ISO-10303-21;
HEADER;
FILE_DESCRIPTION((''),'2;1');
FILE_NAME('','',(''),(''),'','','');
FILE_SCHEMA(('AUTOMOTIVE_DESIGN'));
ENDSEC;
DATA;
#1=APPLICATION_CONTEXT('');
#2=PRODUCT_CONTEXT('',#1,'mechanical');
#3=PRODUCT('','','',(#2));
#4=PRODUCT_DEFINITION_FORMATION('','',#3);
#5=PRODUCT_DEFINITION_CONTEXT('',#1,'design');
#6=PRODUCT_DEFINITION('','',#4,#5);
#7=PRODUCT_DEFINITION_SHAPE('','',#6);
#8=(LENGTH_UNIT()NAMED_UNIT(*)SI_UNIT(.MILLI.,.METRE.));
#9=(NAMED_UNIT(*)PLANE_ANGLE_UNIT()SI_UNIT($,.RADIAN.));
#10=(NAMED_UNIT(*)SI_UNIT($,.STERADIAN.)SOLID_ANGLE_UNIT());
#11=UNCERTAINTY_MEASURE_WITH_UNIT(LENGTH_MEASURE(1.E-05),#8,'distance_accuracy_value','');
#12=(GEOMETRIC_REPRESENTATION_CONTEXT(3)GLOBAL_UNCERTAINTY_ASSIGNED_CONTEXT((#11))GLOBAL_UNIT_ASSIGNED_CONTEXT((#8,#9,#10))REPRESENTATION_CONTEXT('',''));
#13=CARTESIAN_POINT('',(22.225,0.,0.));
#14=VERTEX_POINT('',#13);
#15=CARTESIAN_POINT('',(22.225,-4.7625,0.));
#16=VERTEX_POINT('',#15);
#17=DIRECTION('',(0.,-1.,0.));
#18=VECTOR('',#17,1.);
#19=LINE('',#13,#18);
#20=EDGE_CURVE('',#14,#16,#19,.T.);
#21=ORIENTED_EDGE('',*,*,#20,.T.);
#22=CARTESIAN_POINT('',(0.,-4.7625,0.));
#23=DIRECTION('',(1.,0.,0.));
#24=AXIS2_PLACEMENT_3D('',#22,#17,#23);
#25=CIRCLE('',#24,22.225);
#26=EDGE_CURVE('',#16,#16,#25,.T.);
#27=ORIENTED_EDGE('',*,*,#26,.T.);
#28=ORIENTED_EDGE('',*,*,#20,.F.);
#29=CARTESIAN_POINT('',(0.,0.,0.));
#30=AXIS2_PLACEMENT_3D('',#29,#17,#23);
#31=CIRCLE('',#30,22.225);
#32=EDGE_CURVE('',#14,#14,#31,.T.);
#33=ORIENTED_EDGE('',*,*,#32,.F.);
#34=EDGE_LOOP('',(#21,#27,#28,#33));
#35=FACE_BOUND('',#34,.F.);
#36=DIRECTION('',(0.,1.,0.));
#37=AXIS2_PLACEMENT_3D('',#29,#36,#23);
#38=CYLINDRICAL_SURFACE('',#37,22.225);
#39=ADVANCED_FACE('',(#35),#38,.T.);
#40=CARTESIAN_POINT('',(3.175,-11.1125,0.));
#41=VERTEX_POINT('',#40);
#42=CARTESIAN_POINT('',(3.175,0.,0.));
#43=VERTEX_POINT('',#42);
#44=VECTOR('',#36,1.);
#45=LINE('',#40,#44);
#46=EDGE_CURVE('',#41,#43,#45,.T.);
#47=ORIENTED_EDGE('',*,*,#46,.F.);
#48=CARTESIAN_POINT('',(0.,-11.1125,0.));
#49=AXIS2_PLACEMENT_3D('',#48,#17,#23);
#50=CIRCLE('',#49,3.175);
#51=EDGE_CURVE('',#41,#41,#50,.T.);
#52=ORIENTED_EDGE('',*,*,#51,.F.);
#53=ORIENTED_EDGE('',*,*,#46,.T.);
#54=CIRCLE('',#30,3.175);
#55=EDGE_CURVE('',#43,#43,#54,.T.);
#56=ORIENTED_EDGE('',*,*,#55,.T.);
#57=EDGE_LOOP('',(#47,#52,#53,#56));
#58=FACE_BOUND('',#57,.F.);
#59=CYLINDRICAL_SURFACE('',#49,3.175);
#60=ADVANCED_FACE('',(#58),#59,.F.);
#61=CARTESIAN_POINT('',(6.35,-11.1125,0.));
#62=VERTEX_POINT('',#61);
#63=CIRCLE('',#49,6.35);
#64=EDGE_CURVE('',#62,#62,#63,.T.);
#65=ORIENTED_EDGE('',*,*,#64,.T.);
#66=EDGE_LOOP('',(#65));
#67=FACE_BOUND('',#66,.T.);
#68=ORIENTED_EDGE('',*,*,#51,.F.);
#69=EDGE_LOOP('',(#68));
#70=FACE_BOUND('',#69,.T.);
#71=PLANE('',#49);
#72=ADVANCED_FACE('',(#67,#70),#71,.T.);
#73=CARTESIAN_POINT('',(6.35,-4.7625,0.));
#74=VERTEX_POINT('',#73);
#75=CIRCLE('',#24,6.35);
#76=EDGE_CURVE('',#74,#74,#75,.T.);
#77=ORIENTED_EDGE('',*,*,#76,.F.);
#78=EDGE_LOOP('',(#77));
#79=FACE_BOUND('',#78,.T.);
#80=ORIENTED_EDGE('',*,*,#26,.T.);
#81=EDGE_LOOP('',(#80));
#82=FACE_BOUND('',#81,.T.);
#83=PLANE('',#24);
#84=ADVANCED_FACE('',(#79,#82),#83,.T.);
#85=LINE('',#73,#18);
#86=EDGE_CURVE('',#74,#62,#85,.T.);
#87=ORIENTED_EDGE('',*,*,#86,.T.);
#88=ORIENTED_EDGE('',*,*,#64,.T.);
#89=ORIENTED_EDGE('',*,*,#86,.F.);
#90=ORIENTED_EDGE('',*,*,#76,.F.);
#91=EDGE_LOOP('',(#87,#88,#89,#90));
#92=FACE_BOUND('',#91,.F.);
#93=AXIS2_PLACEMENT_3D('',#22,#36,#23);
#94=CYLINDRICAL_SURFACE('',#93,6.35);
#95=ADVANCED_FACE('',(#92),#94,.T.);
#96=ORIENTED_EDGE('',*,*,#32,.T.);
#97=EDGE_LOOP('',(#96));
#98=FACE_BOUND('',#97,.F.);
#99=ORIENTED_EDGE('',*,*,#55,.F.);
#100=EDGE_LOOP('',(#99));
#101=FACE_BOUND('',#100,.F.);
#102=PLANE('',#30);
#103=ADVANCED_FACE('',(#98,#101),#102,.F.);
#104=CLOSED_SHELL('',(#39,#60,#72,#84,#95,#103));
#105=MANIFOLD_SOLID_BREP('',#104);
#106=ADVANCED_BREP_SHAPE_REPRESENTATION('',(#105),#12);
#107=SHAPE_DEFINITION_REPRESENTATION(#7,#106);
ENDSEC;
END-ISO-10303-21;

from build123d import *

# Parameters (mm, degrees)
F0_R          = 22.225
F1_DEPTH      = 4.7625
F2_R          = 6.35
F3_DEPTH      = 6.35
F4_R          = 3.175
F5_DEPTH      = 25.4
F5_DEPTH_BACK = 73


# Not quite as in the source:
# - an extrude ends at something that could not be found from the text; its depth is read off the source's solid


with BuildPart() as f1:
    # F0 (on Front) → F1 (new body)
    with BuildSketch(Plane.XZ):
        Circle(F0_R)
    extrude(amount=F1_DEPTH)

    # F2 (on face) → F3 (join)
    with BuildSketch(Plane.XZ.offset(4.7625)):
        Circle(F2_R)
    extrude(amount=F3_DEPTH)

    # F4 (on face) → F5 (cut, two sides)
    with BuildSketch(Plane.XZ.offset(11.1125)) as f5_sk:
        Circle(F4_R)
    extrude(amount=-F5_DEPTH, mode=Mode.SUBTRACT)
    extrude(f5_sk.sketch, amount=F5_DEPTH_BACK, mode=Mode.SUBTRACT)


solid = f1.part
